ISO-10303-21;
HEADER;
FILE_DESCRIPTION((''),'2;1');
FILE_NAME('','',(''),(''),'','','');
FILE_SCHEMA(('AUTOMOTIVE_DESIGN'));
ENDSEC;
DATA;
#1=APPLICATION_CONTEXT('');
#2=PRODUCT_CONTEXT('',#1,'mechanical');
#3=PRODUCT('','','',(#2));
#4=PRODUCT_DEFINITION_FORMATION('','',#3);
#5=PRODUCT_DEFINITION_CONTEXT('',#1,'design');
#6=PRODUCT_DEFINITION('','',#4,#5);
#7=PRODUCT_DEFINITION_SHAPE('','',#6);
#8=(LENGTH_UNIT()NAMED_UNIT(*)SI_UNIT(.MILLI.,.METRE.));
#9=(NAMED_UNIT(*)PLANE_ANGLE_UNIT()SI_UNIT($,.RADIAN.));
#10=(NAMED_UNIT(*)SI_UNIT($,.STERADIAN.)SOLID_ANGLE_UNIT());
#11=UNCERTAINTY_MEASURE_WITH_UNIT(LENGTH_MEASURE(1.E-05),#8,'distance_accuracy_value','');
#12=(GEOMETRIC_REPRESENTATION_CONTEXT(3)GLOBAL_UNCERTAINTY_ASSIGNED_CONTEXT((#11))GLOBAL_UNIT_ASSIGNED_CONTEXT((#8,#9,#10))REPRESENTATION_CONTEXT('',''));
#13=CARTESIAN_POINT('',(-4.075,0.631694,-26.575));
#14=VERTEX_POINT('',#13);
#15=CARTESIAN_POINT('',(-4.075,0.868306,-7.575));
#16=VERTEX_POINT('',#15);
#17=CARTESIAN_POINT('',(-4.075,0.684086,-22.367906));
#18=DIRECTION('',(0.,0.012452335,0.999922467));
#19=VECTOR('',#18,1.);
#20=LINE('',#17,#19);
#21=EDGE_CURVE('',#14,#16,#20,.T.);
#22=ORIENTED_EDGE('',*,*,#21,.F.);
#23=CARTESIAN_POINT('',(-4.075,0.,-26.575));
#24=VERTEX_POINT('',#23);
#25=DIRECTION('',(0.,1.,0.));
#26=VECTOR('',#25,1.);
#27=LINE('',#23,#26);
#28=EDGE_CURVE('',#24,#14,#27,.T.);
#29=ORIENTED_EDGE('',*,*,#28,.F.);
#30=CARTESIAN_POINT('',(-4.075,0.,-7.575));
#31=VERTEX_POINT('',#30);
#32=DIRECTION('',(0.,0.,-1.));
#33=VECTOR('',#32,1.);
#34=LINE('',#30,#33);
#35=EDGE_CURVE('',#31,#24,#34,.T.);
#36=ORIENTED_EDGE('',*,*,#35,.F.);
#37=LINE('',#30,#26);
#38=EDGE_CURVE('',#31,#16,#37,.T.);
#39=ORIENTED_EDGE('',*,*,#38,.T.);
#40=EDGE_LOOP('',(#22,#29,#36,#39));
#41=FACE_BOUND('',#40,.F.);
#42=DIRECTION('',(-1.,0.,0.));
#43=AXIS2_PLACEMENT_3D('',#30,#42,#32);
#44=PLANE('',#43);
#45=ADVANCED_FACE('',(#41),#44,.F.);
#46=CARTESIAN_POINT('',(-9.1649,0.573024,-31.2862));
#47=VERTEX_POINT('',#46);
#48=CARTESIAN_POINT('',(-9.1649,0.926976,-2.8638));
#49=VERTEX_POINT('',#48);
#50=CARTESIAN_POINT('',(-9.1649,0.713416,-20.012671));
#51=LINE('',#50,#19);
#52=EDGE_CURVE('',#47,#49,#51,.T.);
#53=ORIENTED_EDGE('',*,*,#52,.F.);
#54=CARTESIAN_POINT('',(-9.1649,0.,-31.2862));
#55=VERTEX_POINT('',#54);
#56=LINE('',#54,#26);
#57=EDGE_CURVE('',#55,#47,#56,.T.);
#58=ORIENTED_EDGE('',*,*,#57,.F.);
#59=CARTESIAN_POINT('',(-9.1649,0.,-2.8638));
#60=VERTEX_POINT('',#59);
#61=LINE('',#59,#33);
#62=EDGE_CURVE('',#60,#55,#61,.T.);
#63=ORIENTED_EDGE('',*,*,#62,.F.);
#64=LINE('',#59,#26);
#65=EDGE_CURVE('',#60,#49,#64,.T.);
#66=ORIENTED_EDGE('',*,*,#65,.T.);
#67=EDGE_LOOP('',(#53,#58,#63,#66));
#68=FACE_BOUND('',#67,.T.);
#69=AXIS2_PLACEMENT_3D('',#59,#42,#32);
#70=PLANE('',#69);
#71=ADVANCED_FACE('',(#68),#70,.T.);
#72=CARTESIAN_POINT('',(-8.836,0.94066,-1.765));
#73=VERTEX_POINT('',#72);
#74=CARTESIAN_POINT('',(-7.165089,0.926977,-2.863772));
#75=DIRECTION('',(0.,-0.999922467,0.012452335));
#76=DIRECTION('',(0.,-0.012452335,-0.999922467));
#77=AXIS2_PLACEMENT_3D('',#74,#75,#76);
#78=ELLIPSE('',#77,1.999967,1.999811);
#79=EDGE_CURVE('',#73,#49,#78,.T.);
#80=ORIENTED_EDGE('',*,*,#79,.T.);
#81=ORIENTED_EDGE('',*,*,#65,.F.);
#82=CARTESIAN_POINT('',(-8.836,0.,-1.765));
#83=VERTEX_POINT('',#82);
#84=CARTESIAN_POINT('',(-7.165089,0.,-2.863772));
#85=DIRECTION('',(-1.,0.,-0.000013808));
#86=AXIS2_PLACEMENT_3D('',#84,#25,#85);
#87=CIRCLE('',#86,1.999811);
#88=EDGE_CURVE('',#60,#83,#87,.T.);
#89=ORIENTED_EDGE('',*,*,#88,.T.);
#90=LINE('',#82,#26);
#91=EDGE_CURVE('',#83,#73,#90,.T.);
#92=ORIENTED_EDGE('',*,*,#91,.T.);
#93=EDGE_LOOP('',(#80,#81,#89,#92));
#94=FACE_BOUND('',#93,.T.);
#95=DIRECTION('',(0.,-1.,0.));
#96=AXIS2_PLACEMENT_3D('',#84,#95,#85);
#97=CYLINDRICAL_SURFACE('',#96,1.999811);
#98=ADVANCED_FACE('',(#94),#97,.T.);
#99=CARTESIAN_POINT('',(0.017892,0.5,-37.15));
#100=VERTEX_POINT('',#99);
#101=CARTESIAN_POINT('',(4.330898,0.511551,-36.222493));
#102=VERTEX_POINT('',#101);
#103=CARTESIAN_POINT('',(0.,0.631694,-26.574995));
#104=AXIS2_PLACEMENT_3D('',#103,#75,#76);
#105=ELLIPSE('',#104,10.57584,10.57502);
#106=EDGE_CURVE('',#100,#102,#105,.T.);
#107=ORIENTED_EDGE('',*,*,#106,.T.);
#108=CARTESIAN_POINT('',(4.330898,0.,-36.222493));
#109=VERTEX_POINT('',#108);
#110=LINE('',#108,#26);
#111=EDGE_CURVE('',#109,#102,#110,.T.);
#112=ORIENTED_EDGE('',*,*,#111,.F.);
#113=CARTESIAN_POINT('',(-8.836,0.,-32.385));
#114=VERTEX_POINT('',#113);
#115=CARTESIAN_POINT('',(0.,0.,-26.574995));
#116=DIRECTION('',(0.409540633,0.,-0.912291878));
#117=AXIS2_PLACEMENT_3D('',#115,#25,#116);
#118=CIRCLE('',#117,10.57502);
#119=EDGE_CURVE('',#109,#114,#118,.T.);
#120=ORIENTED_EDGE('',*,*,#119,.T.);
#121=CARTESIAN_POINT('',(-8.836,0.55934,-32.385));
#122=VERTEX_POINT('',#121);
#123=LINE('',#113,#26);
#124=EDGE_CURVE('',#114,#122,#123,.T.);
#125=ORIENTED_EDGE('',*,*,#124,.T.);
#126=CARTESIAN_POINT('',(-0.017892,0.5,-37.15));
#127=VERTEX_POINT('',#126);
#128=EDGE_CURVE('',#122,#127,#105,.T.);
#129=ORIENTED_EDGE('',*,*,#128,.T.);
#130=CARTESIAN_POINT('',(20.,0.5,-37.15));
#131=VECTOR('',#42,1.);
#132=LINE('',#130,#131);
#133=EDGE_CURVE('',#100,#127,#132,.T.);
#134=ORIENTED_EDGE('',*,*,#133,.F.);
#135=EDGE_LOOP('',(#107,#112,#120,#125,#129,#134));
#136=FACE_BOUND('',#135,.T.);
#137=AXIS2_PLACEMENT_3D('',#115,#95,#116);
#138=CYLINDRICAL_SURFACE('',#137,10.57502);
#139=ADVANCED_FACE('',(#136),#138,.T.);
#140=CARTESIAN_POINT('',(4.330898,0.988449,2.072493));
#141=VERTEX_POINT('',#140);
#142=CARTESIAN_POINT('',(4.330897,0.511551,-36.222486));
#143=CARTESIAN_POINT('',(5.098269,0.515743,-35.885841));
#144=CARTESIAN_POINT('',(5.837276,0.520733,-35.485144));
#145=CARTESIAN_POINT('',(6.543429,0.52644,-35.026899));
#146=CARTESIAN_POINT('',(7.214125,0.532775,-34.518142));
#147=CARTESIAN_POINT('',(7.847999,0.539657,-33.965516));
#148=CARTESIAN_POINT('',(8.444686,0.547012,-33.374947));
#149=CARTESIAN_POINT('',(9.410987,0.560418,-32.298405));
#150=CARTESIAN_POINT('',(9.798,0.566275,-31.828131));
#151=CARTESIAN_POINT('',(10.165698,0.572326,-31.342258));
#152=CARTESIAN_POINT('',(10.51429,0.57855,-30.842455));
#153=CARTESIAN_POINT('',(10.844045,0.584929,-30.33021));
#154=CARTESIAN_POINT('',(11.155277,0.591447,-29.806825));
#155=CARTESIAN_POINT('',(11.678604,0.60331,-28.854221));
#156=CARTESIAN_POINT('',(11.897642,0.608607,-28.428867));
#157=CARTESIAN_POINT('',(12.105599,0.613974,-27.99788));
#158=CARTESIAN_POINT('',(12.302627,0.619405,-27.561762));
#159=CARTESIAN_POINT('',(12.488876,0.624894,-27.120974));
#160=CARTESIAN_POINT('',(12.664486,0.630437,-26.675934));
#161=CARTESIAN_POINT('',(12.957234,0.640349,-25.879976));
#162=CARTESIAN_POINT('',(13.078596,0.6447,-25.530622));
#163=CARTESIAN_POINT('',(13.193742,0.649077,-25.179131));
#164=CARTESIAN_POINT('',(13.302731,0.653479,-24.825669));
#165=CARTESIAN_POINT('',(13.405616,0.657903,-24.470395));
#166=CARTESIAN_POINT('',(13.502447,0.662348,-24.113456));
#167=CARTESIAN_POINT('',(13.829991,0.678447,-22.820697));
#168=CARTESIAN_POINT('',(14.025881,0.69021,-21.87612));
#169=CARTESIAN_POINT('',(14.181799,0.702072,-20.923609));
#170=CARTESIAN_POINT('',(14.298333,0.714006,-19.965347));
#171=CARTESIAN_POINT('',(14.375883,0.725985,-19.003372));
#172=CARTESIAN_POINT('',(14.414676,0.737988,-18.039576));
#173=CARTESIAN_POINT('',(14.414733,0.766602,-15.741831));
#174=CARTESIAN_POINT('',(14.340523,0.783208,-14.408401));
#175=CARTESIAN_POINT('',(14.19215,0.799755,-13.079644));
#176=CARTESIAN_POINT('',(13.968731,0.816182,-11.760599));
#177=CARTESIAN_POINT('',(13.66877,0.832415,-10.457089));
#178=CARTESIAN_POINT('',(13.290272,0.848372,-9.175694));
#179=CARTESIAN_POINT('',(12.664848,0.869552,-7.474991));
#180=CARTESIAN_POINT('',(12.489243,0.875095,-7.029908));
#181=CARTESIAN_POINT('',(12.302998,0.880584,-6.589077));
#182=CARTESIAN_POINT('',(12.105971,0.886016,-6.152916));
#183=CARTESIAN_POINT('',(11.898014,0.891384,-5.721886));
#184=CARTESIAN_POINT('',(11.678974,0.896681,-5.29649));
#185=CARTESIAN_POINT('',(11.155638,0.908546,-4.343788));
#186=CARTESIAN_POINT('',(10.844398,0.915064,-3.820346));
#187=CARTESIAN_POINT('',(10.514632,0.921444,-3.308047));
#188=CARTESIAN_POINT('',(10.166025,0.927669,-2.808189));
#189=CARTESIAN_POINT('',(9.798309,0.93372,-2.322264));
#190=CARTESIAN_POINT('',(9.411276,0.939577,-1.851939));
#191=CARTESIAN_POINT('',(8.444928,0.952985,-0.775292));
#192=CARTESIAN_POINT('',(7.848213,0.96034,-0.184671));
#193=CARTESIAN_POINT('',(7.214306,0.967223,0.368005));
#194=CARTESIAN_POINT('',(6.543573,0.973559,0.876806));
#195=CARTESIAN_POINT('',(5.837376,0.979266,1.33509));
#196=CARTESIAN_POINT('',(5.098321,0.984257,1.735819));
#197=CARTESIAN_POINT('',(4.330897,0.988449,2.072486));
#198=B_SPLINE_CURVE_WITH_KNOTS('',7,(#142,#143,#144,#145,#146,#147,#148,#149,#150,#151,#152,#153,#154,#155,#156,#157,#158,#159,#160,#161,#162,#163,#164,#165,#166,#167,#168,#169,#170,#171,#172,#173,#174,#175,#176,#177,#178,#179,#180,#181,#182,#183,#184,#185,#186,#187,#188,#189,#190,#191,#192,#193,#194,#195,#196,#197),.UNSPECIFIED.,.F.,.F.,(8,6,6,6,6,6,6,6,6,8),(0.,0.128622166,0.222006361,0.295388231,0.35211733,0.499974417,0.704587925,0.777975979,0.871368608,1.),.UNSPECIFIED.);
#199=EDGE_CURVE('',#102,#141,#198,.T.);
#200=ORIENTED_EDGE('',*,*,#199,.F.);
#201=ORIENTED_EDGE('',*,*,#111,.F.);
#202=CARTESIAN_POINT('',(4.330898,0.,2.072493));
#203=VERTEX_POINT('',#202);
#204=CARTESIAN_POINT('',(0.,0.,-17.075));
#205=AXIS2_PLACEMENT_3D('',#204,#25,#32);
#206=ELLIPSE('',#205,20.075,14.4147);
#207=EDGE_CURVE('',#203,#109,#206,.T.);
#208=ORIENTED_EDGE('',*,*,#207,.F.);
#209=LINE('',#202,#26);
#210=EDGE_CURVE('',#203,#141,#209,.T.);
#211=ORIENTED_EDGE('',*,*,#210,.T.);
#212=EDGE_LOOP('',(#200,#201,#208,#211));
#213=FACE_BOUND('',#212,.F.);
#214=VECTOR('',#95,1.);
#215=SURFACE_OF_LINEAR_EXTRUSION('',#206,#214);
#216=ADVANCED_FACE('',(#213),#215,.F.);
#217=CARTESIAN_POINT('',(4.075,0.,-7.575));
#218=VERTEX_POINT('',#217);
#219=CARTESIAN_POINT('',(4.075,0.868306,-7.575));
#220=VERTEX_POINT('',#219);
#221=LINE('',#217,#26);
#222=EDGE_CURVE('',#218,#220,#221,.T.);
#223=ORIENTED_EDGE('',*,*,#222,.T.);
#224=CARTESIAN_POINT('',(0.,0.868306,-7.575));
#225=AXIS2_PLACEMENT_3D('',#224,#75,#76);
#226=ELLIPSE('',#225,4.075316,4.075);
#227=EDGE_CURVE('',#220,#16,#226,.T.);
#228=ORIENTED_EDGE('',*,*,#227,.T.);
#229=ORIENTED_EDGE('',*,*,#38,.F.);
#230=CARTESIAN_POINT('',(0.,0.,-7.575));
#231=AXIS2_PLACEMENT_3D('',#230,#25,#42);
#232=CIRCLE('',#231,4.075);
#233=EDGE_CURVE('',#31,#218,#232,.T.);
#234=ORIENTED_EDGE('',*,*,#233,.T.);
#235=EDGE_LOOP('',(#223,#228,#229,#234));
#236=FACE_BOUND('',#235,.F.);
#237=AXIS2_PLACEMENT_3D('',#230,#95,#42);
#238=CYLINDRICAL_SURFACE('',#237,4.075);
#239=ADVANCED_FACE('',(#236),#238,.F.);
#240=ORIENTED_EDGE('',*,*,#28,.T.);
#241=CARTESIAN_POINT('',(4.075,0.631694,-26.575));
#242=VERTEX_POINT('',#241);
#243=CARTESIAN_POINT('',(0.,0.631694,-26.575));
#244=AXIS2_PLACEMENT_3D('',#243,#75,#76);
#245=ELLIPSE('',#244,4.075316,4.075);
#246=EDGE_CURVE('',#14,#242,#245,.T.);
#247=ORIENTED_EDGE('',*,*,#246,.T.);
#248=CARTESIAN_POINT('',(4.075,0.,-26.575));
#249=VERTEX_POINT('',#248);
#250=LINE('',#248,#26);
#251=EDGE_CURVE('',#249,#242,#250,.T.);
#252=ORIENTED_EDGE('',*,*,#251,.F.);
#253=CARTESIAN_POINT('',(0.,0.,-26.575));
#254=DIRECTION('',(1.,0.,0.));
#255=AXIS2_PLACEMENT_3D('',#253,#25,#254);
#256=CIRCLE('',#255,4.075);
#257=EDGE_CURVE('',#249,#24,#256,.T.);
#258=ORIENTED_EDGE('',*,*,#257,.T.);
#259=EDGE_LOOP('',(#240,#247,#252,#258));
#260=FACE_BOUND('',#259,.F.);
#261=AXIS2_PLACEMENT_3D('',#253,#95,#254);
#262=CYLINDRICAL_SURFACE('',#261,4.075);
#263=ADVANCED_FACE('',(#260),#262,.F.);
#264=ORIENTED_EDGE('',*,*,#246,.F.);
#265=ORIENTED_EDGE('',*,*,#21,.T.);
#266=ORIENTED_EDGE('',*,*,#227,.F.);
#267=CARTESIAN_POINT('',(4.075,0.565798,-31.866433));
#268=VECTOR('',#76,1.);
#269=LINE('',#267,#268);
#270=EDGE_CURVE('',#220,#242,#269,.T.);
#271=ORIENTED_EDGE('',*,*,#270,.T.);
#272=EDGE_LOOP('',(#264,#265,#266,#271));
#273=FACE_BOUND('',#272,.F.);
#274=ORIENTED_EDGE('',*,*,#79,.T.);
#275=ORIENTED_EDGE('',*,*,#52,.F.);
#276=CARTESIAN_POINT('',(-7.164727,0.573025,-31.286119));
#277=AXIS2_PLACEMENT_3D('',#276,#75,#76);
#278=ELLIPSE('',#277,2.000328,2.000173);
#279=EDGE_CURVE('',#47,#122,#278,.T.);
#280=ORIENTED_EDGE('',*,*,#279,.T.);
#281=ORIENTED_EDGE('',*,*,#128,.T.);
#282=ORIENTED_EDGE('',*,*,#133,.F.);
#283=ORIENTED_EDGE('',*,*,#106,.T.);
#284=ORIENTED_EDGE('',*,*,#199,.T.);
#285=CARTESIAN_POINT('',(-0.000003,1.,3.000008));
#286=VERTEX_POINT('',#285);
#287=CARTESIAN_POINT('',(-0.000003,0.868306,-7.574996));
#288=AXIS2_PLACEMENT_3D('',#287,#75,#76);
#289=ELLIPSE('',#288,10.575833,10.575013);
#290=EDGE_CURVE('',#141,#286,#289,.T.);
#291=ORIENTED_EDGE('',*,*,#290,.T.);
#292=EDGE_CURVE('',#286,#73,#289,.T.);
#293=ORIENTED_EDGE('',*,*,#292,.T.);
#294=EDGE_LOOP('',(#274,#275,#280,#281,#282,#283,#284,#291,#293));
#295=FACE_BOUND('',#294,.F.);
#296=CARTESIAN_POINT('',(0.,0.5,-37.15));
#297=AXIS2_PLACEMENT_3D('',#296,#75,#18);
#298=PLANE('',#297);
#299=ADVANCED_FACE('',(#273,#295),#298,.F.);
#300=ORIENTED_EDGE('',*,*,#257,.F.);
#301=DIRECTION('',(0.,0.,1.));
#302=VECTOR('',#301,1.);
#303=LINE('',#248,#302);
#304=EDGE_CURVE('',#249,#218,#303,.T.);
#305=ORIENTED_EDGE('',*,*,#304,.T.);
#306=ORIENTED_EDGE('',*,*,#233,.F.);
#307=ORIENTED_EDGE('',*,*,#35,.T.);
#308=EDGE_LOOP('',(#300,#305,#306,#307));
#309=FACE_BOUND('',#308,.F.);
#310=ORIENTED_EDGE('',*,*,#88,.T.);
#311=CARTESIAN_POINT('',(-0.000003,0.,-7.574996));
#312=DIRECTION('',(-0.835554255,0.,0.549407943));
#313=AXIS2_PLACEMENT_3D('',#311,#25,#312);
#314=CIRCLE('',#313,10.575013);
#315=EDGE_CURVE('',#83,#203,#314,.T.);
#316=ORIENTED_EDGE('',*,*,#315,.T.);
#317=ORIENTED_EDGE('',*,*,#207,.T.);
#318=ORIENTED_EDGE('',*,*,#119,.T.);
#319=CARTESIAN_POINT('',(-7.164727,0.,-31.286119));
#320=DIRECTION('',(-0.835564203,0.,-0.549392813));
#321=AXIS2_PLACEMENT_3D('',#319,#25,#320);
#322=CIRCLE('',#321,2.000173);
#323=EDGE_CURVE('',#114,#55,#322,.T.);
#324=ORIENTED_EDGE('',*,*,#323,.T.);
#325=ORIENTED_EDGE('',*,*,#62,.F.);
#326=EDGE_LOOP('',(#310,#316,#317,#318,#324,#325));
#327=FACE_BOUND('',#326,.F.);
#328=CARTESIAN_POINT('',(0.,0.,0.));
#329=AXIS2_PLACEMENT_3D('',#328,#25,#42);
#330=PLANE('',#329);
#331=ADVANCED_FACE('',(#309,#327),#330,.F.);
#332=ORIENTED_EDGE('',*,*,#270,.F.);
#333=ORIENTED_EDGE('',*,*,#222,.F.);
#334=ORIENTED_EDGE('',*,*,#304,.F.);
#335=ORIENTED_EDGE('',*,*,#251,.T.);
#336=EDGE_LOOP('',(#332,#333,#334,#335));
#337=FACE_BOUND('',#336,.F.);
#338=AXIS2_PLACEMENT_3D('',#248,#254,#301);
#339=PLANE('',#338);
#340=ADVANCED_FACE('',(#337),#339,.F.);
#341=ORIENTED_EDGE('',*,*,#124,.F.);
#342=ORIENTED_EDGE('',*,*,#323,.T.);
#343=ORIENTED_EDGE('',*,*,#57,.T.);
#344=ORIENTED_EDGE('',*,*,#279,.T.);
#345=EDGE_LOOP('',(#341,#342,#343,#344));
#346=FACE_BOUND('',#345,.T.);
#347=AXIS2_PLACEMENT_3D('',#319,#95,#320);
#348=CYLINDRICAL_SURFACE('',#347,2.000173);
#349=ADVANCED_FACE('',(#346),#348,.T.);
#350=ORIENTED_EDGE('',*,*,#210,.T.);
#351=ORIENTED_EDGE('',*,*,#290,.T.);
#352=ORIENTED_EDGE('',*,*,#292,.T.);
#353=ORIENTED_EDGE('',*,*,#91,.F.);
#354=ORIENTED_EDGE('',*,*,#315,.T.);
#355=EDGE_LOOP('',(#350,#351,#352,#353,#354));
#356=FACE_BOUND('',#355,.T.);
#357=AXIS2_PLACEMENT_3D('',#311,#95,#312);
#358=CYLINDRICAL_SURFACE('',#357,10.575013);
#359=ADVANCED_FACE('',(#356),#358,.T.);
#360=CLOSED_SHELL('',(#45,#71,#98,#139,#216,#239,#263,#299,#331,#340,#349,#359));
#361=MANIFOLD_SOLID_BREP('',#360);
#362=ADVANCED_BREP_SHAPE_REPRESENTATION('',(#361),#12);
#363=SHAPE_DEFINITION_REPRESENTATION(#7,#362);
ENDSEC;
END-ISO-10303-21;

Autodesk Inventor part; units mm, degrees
ref_plane "YZ Plane" through (0, 0, 0) normal (1, 0, 0) x (0, 1, 0)
ref_plane "XZ Plane" through (0, 0, 0) normal (0, 1, 0) x (-1, 0, 0)
ref_plane "XY Plane" through (0, 0, 0) normal (0, 0, 1) x (1, 0, 0)
sketch "Sketch1" plane through (0, 0, 0) normal (0, 1, 0) x (-1, 0, 0)
  line L0 (0, 0) -> (0, -34.15) construction
  arc A0 (6.6649, -3.975) -> (-7.575, -7.575) centre (0, -7.575) ccw construction
  arc A1 (-7.575, -26.575) -> (6.6649, -30.175) centre (0, -26.575) ccw construction
  line L1 (4.075, -7.575) -> (4.075, -26.575) construction
  arc A2 (-4.075, -26.575) -> (4.075, -26.575) centre (0, -26.575) ccw construction
  line L2 (-4.075, -26.575) -> (-4.075, -7.575) construction
  arc A3 (4.075, -7.575) -> (-4.075, -7.575) centre (0, -7.575) ccw construction
  line L3 (9.1649, -3.975) -> (9.1649, -30.175) construction
  line L4 (9.1649, -3.975) -> (6.6649, -3.975) construction
  line L5 (9.1649, -30.175) -> (6.6649, -30.175) construction
  line L6 (-10.575, -14.075) -> (-10.575, -20.075) construction
  line L7 (0, -17.075) -> (-19.3792, -17.075) construction
  line L8 (-4.075, -20.075) -> (-4.075, -24.075) construction
  line L9 (-10.575, -20.075) -> (-7.575, -21.8932) construction
  line L10 (-10.575, -14.075) -> (-7.575, -12.2568) construction
  line L11 (-7.575, -7.575) -> (-7.575, -12.2568) construction
  line L12 (-7.575, -21.8932) -> (-7.575, -26.575) construction
  line L13 (-10.575, -17.075) -> (-16.875, -17.075) construction
  line L14 (-10.575, -14.075) -> (-14.875, -14.075) construction
  line L15 (-16.875, -16.075) -> (-16.875, -18.075) construction
  line L16 (-14.875, -20.075) -> (-10.575, -20.075) construction
  arc A4 (-14.875, -14.075) -> (-16.875, -16.075) centre (-14.875, -16.075) ccw construction
  arc A5 (-16.875, -18.075) -> (-14.875, -20.075) centre (-14.875, -18.075) ccw construction
  line L17 (-6.7059, -17.075) -> (-6.7059, -23.075) construction
  line L18 (-6.7059, -17.075) -> (-6.7059, -11.075) construction
  line L19 (-7.575, -11.075) -> (-14.875, -11.075) construction
  line L20 (-16.875, -13.075) -> (-16.875, -21.075) construction
  line L21 (-14.875, -23.075) -> (-7.575, -23.075) construction
  arc A6 (-14.875, -11.075) -> (-16.875, -13.075) centre (-14.875, -13.075) ccw construction
  arc A7 (-16.875, -21.075) -> (-14.875, -23.075) centre (-14.875, -21.075) ccw construction
  line L22 (19.3047, -16.075) -> (19.3047, -18.075) construction
  line L23 (17.3047, -14.075) -> (13.3047, -14.075) construction
  line L24 (17.3047, -20.075) -> (13.3047, -20.075) construction
  line L25 (9.1649, -16.075) -> (9.1649, -22.575) construction
  line L26 (9.1649, -17.075) -> (9.1649, -11.575) construction
  line L27 (9.1649, -11.575) -> (13.3047, -14.075) construction
  line L28 (9.1649, -22.575) -> (13.3047, -20.075) construction
  arc A8 (19.3047, -16.075) -> (17.3047, -14.075) centre (17.3047, -16.075) ccw construction
  arc A9 (17.3047, -20.075) -> (19.3047, -18.075) centre (17.3047, -18.075) ccw construction
  line L29 (9.1649, -30.175) -> (9.1649, -26.175) construction
  line L30 (9.1649, -3.975) -> (9.1649, -7.975) construction
  line L31 (9.1649, -24.9114) -> (13.8618, -22.075) construction
  line L32 (13.8618, -22.075) -> (17.3047, -22.075) construction
  arc A10 (17.3047, -22.075) -> (21.3047, -18.075) centre (17.3047, -18.075) ccw construction
  line L33 (21.3047, -18.075) -> (21.3047, -16.075) construction
  arc A11 (21.3047, -16.075) -> (17.3047, -12.075) centre (17.3047, -16.075) ccw construction
  line L34 (17.3047, -12.075) -> (13.8618, -12.075) construction
  line L35 (13.8618, -12.075) -> (9.1649, -9.2386) construction
  point P0 (7.575, -17.075)
  point P1 (-4.075, -10.075)
  point P2 (19.3047, -14.075)
  point P3 (19.3047, -20.075)
  dimension "d0" = 34.15
  dimension "d1" = 15.15
  dimension "d5" = 6
  dimension "d7" = 4
  dimension "d8" = 2.5
  dimension "d9" = 3.5
  dimension "d10" = 8.15
  dimension "d12" = 2
  dimension "d14" = 6
  dimension "d15" = 6
  dimension "d16" = 2
  dimension "d18" = 6
  dimension "d19" = 6
  dimension "d20" = 5.5
  dimension "d21" = 5.5
  dimension "d23" = 4
  dimension "d24" = 4
  dimension "d25" = 2
sketch "Sketch3" plane through (0, 0, 0) normal (0, 1, 0) x (-1, 0, 0)
  arc A0 (6.6649, -3.975) -> (-7.575, -7.575) centre (0, -7.575) ccw construction
  arc A1 (-7.575, -26.575) -> (6.6649, -30.175) centre (0, -26.575) ccw construction
  arc A2 (-4.075, -26.575) -> (4.075, -26.575) centre (0, -26.575) ccw projected
  line L0 (4.075, -7.575) -> (4.075, -26.575) projected
  arc A3 (4.075, -7.575) -> (-4.075, -7.575) centre (0, -7.575) ccw projected
  line L1 (-4.075, -26.575) -> (-4.075, -7.575) projected
  line L2 (9.1649, -3.975) -> (9.1649, -30.175) construction
  line L3 (-10.575, -14.075) -> (-10.575, -20.075) construction
  line L4 (-16.875, -16.075) -> (-16.875, -18.075) construction
  arc A4 (8.836, -1.765) -> (-4.3309, 2.0725) centre (0, -7.575) ccw
  arc A5 (-4.3309, -36.2225) -> (8.836, -32.385) centre (0, -26.575) ccw
  line L5 (9.1649, -2.8638) -> (9.1649, -31.2862)
  arc A6 (9.1649, -2.8638) -> (8.836, -1.765) centre (7.1649, -2.8638) ccw
  arc A7 (8.836, -32.385) -> (9.1649, -31.2862) centre (7.1649, -31.2862) ccw
  line L6 (-12.075, -10.8843) -> (-12.075, -24.6972)
  ellipse E0 centre (0, -17.075) end of major axis (0, -37.15) minor radius 14.4147 (-4.3309, 2.0725) -> (-4.3309, -36.2225) ccw
  point P0 (0, 0)
  point P1 (9.1649, -2.2991)
  point P2 (9.1649, -31.8509)
  dimension "d26" = 3
  dimension "d27" = 3
  dimension "d28" = 2
  dimension "d29" = 6.5
  dimension "d30" = 8
extrude "Extrusion1" add sketch "Sketch3" along normal blind 1
ref_plane "Work Plane1" through (0, 1, 3) normal (1, 0, 0) x (0, 0, -1)
sketch "Sketch7" plane through (0, 1, 3) normal (1, 0, 0) x (0, 0, -1)
  line L0 (40.15, 0) -> (40.15, -1) projected
  line L1 (40.15, -1) -> (33.65, -1) projected
  line L2 (33.65, -1) -> (33.65, 0) projected
  line L3 (33.65, 0) -> (40.15, 0) projected
  line L4 (0, -1) -> (0, 0) projected
  line L5 (0, 0) -> (6.5, 0) projected
  line L6 (6.5, 0) -> (6.5, -1) projected
  line L7 (6.5, -1) -> (0, -1) projected
  line L8 (40.15, -1) -> (35.385, -1) construction
  line L9 (40.15, -1) -> (40.15, -0.5) construction
  line L10 (40.15, -1) -> (40.15, 0) construction
  line L11 (4.765, 0) -> (0, 0) construction
  line L12 (40.15, -0.5) -> (0, 0)
  line L13 (0, 0) -> (40.15, 0)
  line L14 (40.15, 0) -> (40.15, -0.5)
  point P0 (3, -1)
  point P1 (39.2225, -1)
  point P2 (0.9275, 0)
extrude "Extrusion2" cut sketch "Sketch7" along normal blind 20 and the other way blind 20 contours L0 L12 L2 L3 | L2 L12 L6 L13 | L6 L12 L5
properties part number "SPD_MTB_cleat_new"
